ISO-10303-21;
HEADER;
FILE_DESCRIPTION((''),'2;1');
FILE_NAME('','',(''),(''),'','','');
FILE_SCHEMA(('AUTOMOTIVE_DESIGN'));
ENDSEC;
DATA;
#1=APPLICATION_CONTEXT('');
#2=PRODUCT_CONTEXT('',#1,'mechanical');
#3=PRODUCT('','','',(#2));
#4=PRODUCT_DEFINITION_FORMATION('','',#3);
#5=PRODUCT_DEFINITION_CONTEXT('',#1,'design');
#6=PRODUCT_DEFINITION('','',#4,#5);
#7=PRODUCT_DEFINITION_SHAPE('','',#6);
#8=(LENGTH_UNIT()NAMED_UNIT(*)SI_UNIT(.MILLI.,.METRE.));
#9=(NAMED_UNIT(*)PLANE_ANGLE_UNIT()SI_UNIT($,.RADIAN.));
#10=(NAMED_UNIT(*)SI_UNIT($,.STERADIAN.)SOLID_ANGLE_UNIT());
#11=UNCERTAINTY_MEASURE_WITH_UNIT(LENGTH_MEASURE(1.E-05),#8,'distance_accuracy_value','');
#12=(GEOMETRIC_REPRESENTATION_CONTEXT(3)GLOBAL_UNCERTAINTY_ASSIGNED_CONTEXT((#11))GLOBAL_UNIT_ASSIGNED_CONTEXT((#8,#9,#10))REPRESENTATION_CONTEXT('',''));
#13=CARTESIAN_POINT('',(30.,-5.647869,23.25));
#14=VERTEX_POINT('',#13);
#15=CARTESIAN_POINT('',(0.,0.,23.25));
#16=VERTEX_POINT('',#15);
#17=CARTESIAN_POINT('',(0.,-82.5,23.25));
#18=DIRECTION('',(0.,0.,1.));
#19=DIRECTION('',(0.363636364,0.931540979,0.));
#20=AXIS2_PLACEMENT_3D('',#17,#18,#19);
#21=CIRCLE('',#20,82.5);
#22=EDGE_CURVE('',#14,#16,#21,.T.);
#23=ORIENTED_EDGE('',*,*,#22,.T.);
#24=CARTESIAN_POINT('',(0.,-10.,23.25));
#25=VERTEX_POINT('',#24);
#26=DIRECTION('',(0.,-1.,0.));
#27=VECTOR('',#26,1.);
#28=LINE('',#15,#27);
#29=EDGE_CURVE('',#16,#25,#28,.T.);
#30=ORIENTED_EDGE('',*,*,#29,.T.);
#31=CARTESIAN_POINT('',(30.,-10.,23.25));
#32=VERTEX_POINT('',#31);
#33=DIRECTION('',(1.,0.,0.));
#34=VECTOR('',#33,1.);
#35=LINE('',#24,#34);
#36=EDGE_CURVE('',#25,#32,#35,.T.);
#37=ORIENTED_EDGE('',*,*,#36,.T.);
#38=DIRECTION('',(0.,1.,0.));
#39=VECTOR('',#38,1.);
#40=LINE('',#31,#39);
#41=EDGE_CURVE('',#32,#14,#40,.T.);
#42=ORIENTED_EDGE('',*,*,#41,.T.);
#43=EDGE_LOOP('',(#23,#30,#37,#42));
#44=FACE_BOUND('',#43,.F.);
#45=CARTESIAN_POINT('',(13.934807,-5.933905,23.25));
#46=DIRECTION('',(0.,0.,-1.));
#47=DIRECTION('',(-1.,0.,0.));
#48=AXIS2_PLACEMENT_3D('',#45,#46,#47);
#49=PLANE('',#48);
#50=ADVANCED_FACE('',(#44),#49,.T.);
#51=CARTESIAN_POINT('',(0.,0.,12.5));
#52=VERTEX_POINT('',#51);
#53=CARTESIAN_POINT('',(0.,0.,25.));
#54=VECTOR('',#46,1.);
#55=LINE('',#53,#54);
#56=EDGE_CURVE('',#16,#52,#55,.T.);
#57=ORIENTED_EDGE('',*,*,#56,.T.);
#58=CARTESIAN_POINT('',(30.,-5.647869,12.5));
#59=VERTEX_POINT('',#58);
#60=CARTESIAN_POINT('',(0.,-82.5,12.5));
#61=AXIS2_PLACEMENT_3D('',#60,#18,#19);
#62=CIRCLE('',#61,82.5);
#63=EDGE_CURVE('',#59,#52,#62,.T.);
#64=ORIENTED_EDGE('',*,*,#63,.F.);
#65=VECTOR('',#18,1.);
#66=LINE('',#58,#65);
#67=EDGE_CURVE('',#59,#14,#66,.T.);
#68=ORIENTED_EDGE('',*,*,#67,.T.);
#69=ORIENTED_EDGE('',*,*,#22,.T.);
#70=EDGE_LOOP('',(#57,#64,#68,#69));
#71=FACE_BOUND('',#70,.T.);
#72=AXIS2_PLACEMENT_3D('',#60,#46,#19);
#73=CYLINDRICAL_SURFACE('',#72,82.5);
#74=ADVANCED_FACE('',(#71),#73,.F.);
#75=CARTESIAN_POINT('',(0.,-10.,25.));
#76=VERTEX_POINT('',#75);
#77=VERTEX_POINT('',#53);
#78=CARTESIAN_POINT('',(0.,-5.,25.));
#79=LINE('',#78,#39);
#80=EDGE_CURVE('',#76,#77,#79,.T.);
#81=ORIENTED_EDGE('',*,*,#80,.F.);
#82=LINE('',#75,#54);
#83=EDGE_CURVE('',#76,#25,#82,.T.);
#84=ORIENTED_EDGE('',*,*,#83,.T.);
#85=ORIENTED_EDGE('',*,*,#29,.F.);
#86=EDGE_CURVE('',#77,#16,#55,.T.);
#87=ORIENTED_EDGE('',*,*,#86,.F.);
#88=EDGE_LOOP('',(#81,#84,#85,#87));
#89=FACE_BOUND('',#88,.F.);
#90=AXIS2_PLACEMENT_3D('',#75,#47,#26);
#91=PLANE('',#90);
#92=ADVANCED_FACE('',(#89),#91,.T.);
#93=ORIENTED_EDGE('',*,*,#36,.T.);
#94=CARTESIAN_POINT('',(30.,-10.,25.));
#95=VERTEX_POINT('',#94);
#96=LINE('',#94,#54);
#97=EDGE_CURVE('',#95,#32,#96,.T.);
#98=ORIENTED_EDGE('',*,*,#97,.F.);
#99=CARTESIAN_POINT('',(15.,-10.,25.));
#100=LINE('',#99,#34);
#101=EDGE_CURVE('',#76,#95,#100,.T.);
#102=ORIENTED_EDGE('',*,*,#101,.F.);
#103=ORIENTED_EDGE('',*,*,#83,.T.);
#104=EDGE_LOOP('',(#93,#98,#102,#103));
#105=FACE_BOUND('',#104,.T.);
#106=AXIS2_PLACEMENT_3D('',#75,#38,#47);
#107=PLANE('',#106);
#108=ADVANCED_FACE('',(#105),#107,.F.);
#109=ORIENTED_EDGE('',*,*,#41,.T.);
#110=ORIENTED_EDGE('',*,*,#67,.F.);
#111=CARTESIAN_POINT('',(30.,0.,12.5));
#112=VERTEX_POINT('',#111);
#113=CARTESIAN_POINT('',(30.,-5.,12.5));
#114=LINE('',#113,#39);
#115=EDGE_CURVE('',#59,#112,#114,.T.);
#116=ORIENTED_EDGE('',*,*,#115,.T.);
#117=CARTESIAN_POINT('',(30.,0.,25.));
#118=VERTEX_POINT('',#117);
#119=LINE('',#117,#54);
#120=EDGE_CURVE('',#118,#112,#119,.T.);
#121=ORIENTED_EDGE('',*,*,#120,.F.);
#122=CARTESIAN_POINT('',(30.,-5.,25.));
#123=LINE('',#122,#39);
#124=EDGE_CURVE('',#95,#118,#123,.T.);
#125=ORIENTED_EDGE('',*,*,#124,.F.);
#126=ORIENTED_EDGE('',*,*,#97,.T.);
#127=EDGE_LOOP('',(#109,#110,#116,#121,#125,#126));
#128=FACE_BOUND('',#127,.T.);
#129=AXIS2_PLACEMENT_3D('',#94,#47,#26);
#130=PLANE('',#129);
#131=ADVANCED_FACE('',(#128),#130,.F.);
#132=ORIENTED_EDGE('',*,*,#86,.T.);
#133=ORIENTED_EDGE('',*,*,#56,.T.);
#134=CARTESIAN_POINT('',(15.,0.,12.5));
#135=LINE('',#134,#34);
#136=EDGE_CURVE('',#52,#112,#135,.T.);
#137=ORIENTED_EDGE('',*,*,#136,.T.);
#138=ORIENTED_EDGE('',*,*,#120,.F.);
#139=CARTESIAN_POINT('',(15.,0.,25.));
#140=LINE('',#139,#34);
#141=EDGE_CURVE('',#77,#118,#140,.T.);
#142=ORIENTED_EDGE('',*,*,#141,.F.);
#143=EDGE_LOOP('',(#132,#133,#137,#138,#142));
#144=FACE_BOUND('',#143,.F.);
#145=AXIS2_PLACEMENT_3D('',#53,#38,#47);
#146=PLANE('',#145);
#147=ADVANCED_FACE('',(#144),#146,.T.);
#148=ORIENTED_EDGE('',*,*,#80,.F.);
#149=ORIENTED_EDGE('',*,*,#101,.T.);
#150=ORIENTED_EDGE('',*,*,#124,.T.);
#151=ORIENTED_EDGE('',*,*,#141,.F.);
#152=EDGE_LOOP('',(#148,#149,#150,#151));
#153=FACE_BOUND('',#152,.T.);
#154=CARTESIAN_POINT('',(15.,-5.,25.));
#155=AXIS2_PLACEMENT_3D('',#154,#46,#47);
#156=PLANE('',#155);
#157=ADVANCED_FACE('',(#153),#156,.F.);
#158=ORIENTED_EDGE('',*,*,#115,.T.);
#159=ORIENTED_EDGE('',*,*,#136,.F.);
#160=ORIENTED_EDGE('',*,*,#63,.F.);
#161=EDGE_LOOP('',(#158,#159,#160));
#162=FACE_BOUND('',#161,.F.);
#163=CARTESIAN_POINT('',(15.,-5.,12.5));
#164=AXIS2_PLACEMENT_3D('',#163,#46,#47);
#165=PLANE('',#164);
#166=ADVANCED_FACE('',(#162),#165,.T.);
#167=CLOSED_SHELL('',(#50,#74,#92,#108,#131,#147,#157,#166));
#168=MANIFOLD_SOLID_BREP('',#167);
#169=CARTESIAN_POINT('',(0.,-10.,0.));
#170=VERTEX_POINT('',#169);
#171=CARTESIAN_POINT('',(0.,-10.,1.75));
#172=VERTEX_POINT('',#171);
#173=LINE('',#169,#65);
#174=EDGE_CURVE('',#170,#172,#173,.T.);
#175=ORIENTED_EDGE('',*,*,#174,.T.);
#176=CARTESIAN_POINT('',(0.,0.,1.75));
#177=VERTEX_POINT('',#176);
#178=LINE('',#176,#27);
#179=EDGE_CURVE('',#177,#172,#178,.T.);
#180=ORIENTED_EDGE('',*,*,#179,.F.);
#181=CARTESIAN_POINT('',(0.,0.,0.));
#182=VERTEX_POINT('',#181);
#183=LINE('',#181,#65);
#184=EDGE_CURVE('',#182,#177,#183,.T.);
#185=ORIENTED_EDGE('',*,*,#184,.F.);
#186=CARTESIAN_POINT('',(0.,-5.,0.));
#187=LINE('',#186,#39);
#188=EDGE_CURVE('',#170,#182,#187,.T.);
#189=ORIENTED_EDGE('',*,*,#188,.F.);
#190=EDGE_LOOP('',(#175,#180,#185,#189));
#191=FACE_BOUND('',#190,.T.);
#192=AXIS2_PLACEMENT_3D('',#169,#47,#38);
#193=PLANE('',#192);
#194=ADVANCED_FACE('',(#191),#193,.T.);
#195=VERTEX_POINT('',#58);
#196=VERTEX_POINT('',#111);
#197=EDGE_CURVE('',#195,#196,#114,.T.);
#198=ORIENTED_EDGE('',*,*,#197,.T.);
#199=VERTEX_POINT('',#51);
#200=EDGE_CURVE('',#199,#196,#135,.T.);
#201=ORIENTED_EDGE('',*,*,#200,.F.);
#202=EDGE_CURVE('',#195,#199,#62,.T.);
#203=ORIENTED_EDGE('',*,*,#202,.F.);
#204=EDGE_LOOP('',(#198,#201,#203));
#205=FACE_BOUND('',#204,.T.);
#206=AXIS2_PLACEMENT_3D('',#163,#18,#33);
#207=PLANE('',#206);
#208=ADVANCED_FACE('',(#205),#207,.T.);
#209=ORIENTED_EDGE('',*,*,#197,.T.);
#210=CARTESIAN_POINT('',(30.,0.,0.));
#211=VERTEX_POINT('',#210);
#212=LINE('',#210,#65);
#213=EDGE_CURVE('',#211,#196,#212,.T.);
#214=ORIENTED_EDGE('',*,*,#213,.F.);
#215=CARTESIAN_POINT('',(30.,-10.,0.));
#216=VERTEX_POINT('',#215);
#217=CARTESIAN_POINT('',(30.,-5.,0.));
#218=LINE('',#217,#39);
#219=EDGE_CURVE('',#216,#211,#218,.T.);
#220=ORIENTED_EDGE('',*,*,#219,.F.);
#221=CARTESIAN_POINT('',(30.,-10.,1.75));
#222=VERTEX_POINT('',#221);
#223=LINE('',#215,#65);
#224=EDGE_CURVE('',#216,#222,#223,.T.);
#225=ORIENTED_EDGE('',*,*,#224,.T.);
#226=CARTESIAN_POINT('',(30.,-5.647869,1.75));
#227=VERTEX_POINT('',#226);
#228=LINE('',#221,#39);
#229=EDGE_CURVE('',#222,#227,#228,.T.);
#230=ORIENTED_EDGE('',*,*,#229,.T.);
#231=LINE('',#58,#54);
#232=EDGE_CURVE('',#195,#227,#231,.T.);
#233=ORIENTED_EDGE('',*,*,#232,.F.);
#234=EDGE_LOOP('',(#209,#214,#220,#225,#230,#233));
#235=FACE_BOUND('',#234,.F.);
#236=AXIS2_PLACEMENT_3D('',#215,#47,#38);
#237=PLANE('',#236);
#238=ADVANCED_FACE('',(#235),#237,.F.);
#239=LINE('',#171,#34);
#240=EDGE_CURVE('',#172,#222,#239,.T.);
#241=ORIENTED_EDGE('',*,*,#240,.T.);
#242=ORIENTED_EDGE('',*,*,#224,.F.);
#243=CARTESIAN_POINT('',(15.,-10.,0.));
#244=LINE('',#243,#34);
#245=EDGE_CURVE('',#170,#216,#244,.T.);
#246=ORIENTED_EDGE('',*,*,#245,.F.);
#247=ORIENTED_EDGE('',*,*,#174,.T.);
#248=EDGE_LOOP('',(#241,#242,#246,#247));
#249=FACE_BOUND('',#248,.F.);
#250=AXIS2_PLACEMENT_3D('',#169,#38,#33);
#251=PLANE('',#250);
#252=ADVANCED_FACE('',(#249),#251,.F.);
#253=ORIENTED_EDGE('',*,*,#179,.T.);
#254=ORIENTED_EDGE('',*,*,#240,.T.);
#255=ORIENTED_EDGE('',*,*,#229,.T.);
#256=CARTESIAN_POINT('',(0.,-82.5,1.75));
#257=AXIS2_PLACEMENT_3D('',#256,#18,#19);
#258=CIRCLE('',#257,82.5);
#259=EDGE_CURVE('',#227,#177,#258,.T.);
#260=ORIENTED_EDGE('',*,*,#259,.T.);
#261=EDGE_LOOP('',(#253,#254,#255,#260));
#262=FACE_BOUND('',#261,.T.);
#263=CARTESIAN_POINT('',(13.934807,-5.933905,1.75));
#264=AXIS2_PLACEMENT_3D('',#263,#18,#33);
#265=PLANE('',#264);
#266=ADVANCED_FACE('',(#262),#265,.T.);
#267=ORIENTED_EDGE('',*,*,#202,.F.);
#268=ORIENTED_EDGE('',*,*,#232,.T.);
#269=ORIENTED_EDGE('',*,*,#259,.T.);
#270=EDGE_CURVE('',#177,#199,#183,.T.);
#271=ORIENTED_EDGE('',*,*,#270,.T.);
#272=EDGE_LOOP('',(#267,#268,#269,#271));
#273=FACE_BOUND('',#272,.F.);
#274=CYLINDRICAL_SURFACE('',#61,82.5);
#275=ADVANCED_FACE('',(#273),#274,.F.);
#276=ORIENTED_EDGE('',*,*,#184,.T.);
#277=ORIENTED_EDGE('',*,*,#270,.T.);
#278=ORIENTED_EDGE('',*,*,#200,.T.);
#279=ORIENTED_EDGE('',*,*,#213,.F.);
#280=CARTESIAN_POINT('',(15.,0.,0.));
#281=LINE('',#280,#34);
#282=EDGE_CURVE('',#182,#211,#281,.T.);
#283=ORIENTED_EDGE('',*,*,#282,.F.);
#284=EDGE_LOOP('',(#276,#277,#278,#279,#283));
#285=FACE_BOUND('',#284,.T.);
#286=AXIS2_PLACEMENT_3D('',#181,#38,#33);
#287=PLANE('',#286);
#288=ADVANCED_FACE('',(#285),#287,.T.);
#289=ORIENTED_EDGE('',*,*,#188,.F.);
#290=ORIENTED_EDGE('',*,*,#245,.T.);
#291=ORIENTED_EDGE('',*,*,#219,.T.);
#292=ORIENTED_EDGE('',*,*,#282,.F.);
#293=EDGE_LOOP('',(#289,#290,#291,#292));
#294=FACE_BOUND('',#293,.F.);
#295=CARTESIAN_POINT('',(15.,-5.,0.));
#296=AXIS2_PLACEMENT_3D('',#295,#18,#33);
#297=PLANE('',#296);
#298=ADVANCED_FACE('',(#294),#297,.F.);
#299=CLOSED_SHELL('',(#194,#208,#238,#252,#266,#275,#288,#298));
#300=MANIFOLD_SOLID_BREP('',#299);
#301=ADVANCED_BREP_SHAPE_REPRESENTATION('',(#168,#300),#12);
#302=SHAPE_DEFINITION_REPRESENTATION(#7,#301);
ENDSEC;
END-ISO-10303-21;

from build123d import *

# Parameters (mm, degrees)
F1_W     = 30
F1_H     = 10
F2_DEPTH = 12.5
F4_DEPTH = 10.75


# Not quite as in the source:
# - a feature names something its author has since deleted; it is built from what else it names


with BuildPart() as f2:
    # F1 (on Top) → F2 (new body)
    with BuildSketch(Plane.XY):
        with Locations((15, -5)):
            Rectangle(F1_W, F1_H)
    extrude(amount=F2_DEPTH)

    # F3 (on face) → F4 (cut)
    with BuildSketch(Plane.XY.offset(12.5)):
        with BuildLine():
            Line((30, -10), (30, -5.6478692553))
            ThreePointArc((30, -5.6478692553), (15.2635057173, -1.4242613773), (0, 0))
            Line((0, 0), (0, -10))
            Line((0, -10), (30, -10))
        make_face()
    extrude(amount=-F4_DEPTH, mode=Mode.SUBTRACT)


with BuildPart() as f5_1:
    # F5: instance of F2
    add(f2.part.mirror(Plane(origin=(22.5523055591, -1.6839325629, 12.5), x_dir=(1, 0, 0), z_dir=(0, 0, 1))))


solid = Compound([f2.part, f5_1.part])
